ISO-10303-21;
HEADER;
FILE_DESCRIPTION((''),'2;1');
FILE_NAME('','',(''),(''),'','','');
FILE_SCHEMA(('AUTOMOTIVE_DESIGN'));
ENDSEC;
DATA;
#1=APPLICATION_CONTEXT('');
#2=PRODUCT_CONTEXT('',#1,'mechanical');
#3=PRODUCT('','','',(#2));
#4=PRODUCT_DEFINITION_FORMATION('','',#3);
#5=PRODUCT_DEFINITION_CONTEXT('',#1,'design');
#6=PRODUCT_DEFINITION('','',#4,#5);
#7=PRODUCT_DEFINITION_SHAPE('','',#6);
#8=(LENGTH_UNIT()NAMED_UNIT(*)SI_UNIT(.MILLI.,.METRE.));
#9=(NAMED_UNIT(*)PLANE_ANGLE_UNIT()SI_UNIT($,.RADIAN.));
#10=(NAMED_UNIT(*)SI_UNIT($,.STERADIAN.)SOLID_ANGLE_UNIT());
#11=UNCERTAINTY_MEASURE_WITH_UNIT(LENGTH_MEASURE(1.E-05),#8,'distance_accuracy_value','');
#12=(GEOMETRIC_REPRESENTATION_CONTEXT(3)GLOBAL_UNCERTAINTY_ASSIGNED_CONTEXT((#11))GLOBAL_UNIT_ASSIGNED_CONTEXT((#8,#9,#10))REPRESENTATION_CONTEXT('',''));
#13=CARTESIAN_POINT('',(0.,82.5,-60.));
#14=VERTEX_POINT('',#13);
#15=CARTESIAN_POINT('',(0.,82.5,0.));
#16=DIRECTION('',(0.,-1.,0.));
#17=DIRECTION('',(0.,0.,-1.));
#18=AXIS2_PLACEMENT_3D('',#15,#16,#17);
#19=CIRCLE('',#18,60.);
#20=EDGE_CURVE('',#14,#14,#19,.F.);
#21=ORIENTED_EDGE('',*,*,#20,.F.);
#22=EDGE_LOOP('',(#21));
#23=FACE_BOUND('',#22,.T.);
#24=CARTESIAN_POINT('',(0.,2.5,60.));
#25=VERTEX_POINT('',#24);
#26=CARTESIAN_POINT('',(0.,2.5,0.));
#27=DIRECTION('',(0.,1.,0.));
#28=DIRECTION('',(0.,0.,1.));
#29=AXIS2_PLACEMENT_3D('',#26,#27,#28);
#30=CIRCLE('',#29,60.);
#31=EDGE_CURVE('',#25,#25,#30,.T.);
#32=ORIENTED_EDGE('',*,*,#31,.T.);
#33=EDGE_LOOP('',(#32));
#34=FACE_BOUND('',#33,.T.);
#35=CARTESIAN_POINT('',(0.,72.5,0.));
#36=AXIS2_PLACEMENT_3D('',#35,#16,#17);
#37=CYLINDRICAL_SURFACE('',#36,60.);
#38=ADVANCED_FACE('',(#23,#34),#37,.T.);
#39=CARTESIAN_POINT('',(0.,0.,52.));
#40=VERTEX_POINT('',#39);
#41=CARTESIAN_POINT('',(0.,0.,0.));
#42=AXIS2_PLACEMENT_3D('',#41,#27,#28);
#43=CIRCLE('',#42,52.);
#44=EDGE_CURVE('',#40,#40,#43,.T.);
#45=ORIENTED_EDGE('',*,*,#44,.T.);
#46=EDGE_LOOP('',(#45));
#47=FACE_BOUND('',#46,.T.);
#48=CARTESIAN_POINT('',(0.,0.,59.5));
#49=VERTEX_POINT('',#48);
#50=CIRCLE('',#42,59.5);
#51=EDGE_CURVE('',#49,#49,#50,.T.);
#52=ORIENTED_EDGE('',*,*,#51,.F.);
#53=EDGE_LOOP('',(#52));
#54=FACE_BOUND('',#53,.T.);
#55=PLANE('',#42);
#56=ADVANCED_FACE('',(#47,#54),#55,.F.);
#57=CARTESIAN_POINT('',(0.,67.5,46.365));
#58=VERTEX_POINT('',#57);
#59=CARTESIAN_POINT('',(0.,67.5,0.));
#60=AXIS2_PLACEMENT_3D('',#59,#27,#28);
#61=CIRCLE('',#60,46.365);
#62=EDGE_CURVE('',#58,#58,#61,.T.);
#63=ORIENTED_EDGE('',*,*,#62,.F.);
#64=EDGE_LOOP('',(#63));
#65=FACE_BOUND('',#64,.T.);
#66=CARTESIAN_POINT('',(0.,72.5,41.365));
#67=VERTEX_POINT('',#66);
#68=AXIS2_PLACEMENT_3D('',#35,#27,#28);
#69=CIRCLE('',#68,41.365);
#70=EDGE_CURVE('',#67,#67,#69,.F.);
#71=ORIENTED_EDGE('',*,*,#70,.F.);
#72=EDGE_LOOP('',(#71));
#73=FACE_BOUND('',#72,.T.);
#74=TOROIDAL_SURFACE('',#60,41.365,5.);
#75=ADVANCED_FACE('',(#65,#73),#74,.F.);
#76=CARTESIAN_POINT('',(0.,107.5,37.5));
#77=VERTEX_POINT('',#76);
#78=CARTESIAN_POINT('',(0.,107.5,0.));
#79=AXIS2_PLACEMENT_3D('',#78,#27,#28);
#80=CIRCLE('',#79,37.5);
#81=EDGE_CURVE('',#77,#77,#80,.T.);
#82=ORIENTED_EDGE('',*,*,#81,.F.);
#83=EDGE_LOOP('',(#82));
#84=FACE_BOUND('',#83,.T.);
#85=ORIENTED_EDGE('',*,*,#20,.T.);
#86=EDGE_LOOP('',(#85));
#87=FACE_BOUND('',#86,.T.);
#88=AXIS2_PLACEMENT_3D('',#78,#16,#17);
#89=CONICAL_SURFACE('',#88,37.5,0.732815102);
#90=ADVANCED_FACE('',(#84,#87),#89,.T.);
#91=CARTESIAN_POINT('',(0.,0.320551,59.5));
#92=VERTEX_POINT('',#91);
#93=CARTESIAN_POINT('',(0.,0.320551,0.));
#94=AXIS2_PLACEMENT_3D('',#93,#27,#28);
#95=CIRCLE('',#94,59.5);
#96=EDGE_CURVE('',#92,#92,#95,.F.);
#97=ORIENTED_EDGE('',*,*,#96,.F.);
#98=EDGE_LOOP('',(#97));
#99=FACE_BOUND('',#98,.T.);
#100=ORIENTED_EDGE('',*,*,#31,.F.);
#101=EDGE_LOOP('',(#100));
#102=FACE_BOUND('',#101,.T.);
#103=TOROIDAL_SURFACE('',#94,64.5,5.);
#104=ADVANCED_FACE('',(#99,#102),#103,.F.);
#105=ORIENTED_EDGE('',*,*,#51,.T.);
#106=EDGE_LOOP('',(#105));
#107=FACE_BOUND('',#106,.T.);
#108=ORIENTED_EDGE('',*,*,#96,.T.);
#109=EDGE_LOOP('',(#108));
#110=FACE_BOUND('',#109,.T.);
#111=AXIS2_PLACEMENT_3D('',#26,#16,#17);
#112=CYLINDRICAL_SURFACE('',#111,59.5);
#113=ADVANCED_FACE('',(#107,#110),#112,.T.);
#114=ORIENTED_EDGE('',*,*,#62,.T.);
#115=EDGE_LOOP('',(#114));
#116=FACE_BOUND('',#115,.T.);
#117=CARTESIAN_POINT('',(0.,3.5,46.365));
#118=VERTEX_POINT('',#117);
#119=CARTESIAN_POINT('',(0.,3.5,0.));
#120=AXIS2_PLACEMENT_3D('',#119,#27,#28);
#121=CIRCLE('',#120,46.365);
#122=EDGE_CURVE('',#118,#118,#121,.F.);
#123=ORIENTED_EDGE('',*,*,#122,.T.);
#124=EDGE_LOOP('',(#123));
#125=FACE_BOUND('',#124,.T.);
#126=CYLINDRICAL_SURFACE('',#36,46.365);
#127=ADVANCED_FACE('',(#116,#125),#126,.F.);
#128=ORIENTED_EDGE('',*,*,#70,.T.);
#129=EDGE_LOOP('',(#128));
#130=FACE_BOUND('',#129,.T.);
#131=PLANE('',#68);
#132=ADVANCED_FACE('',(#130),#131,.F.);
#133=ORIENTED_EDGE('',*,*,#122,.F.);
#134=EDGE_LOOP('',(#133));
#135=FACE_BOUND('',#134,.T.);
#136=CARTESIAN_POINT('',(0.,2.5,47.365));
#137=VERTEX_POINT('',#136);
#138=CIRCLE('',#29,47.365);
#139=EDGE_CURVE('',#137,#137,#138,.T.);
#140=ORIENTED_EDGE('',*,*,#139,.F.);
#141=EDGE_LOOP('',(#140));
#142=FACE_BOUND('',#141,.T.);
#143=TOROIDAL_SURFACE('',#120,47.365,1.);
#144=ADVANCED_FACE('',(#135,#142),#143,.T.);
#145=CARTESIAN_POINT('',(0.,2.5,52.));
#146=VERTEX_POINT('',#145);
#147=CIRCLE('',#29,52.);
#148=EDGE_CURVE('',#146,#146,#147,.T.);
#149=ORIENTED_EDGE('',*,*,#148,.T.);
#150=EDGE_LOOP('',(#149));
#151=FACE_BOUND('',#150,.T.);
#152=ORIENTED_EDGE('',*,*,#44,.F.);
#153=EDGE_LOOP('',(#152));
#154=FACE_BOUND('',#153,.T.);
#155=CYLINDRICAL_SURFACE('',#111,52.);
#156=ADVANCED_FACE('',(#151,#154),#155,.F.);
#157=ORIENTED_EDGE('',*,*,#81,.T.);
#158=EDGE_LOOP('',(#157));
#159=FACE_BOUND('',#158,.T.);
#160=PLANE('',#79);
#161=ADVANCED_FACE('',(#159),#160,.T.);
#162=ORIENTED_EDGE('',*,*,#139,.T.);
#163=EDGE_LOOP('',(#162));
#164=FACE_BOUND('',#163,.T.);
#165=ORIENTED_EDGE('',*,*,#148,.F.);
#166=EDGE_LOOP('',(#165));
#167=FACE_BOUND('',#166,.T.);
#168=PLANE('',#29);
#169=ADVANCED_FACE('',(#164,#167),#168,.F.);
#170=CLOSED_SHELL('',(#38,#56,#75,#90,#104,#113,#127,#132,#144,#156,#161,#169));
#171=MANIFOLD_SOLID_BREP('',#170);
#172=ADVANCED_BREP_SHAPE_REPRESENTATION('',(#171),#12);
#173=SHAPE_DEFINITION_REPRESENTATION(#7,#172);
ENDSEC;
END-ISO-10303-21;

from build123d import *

# Parameters (mm, degrees)
SKETCH1_R           = 59.5
SKETCH1_R_2         = 52
BOSS_EXTRUDE1_DEPTH = 2.5
SKETCH2_R           = 60
SKETCH2_R_2         = 46.365
BOSS_EXTRUDE2_DEPTH = 70
SKETCH3_R           = 60
BOSS_EXTRUDE3_DEPTH = 10
FILLET1_R           = 1
SKETCH4_R           = 37.5
FILLET2_R           = 5
FILLET3_R           = 5


with BuildPart() as part:
    # Sketch1 → Boss-Extrude1 (new body)
    with BuildSketch(Plane(origin=(0, 0, 0), x_dir=(1, 0, 0), z_dir=(0, 1, 0))):
        with Locations(Location((0, 0, 0), (0, 0, 270))):
            Circle(SKETCH1_R)
        with Locations(Location((0, 0, 0), (0, 0, 270))):
            Circle(SKETCH1_R_2, mode=Mode.SUBTRACT)
    extrude(amount=BOSS_EXTRUDE1_DEPTH)

    # Sketch2 → Boss-Extrude2 (add)
    with BuildSketch(Plane(origin=(0, 2.5, 0), x_dir=(1, 0, 0), z_dir=(0, 1, 0))):
        with Locations(Location((0, 0, 0), (0, 0, 270))):
            Circle(SKETCH2_R)
        with Locations(Location((0, 0, 0), (0, 0, 270))):
            Circle(SKETCH2_R_2, mode=Mode.SUBTRACT)
    extrude(amount=BOSS_EXTRUDE2_DEPTH)

    # Sketch3 → Boss-Extrude3 (add)
    with BuildSketch(Plane(origin=(0, 72.5, 0), x_dir=(1, 0, 0), z_dir=(0, 1, 0))):
        with Locations(Location((0, 0, 0), (0, 0, 270))):
            Circle(SKETCH3_R)
    extrude(amount=BOSS_EXTRUDE3_DEPTH)

    # Fillet1
    fillet1_edges = [part.edges().sort_by_distance(p)[0] for p in [
        (0, 2.5, -46.365),
    ]]
    fillet(fillet1_edges, radius=FILLET1_R)

    # Sketch4 → section 1 of loft1
    with BuildSketch(Plane(origin=(0, 107.5, 0), x_dir=(1, 0, 0), z_dir=(0, 1, 0)), mode=Mode.PRIVATE) as loft1_s1:
        Circle(SKETCH4_R)
    # loft up to a face of the part (loft1)
    loft([Face(Wire([part.edges().sort_by_distance((43.738117645, 82.5, -41.072826356))[0]])), loft1_s1.sketch])

    # Fillet2
    fillet2_edges = [part.edges().sort_by_distance(p)[0] for p in [
        (0, 72.5, -46.365),
    ]]
    fillet(fillet2_edges, radius=FILLET2_R)

    # Fillet3
    # the kernel refuses this fillet: 5 mm, written as the material it adds along each edge
    with BuildSketch(Plane(origin=(0, 2.5, 0), x_dir=(0, 0, 1), z_dir=(-1, 0, 0))) as fillet3_piece_1:
        with BuildLine():
            CenterArc((64.5, -2.179449472), FILLET3_R, 154.158067237, 25.841932763)
            Line((60, 0), (59.5, 0))
            Line((59.5, 0), (59.5, -2.179449472))
        make_face()
    revolve(axis=Axis((0, 2.5, 0), (0, 1, 0)))


solid = part.part
